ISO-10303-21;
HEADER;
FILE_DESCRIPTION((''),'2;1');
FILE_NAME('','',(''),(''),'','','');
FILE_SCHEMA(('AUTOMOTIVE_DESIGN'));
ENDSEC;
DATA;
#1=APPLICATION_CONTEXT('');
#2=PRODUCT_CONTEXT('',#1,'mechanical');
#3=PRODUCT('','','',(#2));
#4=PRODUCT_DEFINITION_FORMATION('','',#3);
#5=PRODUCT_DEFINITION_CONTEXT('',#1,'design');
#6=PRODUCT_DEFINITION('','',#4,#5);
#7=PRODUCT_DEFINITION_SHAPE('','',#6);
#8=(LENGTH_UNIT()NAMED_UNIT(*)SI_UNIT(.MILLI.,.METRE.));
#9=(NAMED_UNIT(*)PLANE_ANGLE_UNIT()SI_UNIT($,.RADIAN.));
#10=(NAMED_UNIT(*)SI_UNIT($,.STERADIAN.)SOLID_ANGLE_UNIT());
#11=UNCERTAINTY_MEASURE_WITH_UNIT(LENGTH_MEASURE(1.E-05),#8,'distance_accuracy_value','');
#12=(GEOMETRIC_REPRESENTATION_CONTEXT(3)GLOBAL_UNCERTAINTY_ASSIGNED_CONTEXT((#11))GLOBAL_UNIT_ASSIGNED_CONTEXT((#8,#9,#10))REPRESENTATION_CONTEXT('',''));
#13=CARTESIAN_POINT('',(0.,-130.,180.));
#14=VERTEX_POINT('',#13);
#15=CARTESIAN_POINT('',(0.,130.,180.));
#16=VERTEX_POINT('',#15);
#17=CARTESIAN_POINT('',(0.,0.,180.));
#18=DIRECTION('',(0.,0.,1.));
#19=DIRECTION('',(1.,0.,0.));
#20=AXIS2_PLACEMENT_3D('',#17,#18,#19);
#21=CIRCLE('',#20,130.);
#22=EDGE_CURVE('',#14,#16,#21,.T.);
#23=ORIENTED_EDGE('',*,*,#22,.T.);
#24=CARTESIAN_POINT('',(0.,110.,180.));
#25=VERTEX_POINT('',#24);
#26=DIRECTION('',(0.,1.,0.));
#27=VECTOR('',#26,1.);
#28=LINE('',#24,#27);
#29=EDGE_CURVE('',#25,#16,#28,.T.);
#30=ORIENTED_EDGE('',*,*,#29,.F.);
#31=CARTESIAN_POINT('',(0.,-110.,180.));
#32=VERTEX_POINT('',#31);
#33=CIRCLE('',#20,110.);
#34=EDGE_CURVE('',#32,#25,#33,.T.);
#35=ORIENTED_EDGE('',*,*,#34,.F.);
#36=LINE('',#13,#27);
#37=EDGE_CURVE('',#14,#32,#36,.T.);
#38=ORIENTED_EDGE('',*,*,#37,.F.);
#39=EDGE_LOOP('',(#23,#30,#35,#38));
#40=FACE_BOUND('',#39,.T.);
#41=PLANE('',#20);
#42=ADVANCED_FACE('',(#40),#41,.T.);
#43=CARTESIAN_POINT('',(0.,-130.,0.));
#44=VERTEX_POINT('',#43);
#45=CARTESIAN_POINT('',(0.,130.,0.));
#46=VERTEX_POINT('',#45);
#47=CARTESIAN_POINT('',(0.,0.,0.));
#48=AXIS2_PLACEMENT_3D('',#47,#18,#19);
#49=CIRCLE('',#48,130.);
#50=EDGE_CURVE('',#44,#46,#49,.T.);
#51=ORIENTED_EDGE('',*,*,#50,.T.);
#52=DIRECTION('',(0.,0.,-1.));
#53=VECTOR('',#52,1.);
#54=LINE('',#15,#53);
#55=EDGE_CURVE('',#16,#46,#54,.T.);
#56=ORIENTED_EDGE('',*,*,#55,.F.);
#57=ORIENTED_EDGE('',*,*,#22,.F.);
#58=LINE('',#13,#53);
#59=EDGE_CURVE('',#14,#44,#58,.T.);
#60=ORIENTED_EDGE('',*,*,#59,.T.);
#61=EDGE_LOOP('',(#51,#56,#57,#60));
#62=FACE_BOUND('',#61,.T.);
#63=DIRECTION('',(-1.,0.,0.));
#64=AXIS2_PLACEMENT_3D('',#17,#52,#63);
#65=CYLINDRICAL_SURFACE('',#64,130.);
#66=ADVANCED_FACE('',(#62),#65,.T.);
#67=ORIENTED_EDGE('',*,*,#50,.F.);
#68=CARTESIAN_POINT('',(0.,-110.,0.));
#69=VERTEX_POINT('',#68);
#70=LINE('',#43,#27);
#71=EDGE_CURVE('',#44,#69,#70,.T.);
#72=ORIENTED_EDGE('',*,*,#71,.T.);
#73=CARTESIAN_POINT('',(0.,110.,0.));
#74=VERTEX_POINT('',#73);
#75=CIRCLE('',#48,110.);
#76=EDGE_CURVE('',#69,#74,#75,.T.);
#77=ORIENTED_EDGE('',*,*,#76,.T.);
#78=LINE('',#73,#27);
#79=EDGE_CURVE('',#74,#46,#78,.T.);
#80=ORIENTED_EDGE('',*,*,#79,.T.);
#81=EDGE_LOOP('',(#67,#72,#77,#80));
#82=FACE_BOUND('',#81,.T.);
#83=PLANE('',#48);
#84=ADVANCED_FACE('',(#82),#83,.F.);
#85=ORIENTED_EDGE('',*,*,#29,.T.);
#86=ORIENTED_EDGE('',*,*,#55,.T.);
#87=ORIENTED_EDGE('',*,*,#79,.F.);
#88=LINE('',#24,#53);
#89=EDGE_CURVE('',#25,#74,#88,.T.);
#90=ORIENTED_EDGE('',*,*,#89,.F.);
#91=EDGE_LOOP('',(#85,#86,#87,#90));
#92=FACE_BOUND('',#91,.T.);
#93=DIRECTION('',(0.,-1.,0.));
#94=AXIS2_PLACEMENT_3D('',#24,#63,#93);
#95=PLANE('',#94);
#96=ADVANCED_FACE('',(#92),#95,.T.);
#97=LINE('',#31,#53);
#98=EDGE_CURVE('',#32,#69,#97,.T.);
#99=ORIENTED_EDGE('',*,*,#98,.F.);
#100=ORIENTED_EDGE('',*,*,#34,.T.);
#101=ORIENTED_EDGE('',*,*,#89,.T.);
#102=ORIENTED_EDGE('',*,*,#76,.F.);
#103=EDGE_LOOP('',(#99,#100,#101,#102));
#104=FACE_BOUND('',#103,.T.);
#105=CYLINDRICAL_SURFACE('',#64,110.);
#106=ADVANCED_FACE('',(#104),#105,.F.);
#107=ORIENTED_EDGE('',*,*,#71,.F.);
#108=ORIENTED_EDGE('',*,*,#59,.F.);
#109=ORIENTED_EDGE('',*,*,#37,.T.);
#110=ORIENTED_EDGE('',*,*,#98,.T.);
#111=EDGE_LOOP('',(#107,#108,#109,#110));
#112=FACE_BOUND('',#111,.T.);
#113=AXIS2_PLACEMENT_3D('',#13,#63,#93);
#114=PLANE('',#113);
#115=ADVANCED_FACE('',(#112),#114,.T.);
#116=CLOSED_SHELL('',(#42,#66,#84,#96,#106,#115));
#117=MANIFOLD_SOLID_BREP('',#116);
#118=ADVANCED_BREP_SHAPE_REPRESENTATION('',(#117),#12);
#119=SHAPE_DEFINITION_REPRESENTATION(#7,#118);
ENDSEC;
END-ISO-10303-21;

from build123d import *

# Parameters (mm, degrees)
BASE_FLANGE1_DEPTH = 180


# Sheet-metal steps are written as plain solids
with BuildPart() as part:
    # Sketch1 → Base-Flange1 (new body)
    with BuildSketch(Plane.XY):
        with BuildLine():
            ThreePointArc((0, -110), (110, 0), (0, 110))
            Line((0, 110), (0, 130))
            ThreePointArc((0, 130), (130, 0), (0, -130))
            Line((0, -130), (0, -110))
        make_face()
    extrude(amount=BASE_FLANGE1_DEPTH)


solid = part.part
